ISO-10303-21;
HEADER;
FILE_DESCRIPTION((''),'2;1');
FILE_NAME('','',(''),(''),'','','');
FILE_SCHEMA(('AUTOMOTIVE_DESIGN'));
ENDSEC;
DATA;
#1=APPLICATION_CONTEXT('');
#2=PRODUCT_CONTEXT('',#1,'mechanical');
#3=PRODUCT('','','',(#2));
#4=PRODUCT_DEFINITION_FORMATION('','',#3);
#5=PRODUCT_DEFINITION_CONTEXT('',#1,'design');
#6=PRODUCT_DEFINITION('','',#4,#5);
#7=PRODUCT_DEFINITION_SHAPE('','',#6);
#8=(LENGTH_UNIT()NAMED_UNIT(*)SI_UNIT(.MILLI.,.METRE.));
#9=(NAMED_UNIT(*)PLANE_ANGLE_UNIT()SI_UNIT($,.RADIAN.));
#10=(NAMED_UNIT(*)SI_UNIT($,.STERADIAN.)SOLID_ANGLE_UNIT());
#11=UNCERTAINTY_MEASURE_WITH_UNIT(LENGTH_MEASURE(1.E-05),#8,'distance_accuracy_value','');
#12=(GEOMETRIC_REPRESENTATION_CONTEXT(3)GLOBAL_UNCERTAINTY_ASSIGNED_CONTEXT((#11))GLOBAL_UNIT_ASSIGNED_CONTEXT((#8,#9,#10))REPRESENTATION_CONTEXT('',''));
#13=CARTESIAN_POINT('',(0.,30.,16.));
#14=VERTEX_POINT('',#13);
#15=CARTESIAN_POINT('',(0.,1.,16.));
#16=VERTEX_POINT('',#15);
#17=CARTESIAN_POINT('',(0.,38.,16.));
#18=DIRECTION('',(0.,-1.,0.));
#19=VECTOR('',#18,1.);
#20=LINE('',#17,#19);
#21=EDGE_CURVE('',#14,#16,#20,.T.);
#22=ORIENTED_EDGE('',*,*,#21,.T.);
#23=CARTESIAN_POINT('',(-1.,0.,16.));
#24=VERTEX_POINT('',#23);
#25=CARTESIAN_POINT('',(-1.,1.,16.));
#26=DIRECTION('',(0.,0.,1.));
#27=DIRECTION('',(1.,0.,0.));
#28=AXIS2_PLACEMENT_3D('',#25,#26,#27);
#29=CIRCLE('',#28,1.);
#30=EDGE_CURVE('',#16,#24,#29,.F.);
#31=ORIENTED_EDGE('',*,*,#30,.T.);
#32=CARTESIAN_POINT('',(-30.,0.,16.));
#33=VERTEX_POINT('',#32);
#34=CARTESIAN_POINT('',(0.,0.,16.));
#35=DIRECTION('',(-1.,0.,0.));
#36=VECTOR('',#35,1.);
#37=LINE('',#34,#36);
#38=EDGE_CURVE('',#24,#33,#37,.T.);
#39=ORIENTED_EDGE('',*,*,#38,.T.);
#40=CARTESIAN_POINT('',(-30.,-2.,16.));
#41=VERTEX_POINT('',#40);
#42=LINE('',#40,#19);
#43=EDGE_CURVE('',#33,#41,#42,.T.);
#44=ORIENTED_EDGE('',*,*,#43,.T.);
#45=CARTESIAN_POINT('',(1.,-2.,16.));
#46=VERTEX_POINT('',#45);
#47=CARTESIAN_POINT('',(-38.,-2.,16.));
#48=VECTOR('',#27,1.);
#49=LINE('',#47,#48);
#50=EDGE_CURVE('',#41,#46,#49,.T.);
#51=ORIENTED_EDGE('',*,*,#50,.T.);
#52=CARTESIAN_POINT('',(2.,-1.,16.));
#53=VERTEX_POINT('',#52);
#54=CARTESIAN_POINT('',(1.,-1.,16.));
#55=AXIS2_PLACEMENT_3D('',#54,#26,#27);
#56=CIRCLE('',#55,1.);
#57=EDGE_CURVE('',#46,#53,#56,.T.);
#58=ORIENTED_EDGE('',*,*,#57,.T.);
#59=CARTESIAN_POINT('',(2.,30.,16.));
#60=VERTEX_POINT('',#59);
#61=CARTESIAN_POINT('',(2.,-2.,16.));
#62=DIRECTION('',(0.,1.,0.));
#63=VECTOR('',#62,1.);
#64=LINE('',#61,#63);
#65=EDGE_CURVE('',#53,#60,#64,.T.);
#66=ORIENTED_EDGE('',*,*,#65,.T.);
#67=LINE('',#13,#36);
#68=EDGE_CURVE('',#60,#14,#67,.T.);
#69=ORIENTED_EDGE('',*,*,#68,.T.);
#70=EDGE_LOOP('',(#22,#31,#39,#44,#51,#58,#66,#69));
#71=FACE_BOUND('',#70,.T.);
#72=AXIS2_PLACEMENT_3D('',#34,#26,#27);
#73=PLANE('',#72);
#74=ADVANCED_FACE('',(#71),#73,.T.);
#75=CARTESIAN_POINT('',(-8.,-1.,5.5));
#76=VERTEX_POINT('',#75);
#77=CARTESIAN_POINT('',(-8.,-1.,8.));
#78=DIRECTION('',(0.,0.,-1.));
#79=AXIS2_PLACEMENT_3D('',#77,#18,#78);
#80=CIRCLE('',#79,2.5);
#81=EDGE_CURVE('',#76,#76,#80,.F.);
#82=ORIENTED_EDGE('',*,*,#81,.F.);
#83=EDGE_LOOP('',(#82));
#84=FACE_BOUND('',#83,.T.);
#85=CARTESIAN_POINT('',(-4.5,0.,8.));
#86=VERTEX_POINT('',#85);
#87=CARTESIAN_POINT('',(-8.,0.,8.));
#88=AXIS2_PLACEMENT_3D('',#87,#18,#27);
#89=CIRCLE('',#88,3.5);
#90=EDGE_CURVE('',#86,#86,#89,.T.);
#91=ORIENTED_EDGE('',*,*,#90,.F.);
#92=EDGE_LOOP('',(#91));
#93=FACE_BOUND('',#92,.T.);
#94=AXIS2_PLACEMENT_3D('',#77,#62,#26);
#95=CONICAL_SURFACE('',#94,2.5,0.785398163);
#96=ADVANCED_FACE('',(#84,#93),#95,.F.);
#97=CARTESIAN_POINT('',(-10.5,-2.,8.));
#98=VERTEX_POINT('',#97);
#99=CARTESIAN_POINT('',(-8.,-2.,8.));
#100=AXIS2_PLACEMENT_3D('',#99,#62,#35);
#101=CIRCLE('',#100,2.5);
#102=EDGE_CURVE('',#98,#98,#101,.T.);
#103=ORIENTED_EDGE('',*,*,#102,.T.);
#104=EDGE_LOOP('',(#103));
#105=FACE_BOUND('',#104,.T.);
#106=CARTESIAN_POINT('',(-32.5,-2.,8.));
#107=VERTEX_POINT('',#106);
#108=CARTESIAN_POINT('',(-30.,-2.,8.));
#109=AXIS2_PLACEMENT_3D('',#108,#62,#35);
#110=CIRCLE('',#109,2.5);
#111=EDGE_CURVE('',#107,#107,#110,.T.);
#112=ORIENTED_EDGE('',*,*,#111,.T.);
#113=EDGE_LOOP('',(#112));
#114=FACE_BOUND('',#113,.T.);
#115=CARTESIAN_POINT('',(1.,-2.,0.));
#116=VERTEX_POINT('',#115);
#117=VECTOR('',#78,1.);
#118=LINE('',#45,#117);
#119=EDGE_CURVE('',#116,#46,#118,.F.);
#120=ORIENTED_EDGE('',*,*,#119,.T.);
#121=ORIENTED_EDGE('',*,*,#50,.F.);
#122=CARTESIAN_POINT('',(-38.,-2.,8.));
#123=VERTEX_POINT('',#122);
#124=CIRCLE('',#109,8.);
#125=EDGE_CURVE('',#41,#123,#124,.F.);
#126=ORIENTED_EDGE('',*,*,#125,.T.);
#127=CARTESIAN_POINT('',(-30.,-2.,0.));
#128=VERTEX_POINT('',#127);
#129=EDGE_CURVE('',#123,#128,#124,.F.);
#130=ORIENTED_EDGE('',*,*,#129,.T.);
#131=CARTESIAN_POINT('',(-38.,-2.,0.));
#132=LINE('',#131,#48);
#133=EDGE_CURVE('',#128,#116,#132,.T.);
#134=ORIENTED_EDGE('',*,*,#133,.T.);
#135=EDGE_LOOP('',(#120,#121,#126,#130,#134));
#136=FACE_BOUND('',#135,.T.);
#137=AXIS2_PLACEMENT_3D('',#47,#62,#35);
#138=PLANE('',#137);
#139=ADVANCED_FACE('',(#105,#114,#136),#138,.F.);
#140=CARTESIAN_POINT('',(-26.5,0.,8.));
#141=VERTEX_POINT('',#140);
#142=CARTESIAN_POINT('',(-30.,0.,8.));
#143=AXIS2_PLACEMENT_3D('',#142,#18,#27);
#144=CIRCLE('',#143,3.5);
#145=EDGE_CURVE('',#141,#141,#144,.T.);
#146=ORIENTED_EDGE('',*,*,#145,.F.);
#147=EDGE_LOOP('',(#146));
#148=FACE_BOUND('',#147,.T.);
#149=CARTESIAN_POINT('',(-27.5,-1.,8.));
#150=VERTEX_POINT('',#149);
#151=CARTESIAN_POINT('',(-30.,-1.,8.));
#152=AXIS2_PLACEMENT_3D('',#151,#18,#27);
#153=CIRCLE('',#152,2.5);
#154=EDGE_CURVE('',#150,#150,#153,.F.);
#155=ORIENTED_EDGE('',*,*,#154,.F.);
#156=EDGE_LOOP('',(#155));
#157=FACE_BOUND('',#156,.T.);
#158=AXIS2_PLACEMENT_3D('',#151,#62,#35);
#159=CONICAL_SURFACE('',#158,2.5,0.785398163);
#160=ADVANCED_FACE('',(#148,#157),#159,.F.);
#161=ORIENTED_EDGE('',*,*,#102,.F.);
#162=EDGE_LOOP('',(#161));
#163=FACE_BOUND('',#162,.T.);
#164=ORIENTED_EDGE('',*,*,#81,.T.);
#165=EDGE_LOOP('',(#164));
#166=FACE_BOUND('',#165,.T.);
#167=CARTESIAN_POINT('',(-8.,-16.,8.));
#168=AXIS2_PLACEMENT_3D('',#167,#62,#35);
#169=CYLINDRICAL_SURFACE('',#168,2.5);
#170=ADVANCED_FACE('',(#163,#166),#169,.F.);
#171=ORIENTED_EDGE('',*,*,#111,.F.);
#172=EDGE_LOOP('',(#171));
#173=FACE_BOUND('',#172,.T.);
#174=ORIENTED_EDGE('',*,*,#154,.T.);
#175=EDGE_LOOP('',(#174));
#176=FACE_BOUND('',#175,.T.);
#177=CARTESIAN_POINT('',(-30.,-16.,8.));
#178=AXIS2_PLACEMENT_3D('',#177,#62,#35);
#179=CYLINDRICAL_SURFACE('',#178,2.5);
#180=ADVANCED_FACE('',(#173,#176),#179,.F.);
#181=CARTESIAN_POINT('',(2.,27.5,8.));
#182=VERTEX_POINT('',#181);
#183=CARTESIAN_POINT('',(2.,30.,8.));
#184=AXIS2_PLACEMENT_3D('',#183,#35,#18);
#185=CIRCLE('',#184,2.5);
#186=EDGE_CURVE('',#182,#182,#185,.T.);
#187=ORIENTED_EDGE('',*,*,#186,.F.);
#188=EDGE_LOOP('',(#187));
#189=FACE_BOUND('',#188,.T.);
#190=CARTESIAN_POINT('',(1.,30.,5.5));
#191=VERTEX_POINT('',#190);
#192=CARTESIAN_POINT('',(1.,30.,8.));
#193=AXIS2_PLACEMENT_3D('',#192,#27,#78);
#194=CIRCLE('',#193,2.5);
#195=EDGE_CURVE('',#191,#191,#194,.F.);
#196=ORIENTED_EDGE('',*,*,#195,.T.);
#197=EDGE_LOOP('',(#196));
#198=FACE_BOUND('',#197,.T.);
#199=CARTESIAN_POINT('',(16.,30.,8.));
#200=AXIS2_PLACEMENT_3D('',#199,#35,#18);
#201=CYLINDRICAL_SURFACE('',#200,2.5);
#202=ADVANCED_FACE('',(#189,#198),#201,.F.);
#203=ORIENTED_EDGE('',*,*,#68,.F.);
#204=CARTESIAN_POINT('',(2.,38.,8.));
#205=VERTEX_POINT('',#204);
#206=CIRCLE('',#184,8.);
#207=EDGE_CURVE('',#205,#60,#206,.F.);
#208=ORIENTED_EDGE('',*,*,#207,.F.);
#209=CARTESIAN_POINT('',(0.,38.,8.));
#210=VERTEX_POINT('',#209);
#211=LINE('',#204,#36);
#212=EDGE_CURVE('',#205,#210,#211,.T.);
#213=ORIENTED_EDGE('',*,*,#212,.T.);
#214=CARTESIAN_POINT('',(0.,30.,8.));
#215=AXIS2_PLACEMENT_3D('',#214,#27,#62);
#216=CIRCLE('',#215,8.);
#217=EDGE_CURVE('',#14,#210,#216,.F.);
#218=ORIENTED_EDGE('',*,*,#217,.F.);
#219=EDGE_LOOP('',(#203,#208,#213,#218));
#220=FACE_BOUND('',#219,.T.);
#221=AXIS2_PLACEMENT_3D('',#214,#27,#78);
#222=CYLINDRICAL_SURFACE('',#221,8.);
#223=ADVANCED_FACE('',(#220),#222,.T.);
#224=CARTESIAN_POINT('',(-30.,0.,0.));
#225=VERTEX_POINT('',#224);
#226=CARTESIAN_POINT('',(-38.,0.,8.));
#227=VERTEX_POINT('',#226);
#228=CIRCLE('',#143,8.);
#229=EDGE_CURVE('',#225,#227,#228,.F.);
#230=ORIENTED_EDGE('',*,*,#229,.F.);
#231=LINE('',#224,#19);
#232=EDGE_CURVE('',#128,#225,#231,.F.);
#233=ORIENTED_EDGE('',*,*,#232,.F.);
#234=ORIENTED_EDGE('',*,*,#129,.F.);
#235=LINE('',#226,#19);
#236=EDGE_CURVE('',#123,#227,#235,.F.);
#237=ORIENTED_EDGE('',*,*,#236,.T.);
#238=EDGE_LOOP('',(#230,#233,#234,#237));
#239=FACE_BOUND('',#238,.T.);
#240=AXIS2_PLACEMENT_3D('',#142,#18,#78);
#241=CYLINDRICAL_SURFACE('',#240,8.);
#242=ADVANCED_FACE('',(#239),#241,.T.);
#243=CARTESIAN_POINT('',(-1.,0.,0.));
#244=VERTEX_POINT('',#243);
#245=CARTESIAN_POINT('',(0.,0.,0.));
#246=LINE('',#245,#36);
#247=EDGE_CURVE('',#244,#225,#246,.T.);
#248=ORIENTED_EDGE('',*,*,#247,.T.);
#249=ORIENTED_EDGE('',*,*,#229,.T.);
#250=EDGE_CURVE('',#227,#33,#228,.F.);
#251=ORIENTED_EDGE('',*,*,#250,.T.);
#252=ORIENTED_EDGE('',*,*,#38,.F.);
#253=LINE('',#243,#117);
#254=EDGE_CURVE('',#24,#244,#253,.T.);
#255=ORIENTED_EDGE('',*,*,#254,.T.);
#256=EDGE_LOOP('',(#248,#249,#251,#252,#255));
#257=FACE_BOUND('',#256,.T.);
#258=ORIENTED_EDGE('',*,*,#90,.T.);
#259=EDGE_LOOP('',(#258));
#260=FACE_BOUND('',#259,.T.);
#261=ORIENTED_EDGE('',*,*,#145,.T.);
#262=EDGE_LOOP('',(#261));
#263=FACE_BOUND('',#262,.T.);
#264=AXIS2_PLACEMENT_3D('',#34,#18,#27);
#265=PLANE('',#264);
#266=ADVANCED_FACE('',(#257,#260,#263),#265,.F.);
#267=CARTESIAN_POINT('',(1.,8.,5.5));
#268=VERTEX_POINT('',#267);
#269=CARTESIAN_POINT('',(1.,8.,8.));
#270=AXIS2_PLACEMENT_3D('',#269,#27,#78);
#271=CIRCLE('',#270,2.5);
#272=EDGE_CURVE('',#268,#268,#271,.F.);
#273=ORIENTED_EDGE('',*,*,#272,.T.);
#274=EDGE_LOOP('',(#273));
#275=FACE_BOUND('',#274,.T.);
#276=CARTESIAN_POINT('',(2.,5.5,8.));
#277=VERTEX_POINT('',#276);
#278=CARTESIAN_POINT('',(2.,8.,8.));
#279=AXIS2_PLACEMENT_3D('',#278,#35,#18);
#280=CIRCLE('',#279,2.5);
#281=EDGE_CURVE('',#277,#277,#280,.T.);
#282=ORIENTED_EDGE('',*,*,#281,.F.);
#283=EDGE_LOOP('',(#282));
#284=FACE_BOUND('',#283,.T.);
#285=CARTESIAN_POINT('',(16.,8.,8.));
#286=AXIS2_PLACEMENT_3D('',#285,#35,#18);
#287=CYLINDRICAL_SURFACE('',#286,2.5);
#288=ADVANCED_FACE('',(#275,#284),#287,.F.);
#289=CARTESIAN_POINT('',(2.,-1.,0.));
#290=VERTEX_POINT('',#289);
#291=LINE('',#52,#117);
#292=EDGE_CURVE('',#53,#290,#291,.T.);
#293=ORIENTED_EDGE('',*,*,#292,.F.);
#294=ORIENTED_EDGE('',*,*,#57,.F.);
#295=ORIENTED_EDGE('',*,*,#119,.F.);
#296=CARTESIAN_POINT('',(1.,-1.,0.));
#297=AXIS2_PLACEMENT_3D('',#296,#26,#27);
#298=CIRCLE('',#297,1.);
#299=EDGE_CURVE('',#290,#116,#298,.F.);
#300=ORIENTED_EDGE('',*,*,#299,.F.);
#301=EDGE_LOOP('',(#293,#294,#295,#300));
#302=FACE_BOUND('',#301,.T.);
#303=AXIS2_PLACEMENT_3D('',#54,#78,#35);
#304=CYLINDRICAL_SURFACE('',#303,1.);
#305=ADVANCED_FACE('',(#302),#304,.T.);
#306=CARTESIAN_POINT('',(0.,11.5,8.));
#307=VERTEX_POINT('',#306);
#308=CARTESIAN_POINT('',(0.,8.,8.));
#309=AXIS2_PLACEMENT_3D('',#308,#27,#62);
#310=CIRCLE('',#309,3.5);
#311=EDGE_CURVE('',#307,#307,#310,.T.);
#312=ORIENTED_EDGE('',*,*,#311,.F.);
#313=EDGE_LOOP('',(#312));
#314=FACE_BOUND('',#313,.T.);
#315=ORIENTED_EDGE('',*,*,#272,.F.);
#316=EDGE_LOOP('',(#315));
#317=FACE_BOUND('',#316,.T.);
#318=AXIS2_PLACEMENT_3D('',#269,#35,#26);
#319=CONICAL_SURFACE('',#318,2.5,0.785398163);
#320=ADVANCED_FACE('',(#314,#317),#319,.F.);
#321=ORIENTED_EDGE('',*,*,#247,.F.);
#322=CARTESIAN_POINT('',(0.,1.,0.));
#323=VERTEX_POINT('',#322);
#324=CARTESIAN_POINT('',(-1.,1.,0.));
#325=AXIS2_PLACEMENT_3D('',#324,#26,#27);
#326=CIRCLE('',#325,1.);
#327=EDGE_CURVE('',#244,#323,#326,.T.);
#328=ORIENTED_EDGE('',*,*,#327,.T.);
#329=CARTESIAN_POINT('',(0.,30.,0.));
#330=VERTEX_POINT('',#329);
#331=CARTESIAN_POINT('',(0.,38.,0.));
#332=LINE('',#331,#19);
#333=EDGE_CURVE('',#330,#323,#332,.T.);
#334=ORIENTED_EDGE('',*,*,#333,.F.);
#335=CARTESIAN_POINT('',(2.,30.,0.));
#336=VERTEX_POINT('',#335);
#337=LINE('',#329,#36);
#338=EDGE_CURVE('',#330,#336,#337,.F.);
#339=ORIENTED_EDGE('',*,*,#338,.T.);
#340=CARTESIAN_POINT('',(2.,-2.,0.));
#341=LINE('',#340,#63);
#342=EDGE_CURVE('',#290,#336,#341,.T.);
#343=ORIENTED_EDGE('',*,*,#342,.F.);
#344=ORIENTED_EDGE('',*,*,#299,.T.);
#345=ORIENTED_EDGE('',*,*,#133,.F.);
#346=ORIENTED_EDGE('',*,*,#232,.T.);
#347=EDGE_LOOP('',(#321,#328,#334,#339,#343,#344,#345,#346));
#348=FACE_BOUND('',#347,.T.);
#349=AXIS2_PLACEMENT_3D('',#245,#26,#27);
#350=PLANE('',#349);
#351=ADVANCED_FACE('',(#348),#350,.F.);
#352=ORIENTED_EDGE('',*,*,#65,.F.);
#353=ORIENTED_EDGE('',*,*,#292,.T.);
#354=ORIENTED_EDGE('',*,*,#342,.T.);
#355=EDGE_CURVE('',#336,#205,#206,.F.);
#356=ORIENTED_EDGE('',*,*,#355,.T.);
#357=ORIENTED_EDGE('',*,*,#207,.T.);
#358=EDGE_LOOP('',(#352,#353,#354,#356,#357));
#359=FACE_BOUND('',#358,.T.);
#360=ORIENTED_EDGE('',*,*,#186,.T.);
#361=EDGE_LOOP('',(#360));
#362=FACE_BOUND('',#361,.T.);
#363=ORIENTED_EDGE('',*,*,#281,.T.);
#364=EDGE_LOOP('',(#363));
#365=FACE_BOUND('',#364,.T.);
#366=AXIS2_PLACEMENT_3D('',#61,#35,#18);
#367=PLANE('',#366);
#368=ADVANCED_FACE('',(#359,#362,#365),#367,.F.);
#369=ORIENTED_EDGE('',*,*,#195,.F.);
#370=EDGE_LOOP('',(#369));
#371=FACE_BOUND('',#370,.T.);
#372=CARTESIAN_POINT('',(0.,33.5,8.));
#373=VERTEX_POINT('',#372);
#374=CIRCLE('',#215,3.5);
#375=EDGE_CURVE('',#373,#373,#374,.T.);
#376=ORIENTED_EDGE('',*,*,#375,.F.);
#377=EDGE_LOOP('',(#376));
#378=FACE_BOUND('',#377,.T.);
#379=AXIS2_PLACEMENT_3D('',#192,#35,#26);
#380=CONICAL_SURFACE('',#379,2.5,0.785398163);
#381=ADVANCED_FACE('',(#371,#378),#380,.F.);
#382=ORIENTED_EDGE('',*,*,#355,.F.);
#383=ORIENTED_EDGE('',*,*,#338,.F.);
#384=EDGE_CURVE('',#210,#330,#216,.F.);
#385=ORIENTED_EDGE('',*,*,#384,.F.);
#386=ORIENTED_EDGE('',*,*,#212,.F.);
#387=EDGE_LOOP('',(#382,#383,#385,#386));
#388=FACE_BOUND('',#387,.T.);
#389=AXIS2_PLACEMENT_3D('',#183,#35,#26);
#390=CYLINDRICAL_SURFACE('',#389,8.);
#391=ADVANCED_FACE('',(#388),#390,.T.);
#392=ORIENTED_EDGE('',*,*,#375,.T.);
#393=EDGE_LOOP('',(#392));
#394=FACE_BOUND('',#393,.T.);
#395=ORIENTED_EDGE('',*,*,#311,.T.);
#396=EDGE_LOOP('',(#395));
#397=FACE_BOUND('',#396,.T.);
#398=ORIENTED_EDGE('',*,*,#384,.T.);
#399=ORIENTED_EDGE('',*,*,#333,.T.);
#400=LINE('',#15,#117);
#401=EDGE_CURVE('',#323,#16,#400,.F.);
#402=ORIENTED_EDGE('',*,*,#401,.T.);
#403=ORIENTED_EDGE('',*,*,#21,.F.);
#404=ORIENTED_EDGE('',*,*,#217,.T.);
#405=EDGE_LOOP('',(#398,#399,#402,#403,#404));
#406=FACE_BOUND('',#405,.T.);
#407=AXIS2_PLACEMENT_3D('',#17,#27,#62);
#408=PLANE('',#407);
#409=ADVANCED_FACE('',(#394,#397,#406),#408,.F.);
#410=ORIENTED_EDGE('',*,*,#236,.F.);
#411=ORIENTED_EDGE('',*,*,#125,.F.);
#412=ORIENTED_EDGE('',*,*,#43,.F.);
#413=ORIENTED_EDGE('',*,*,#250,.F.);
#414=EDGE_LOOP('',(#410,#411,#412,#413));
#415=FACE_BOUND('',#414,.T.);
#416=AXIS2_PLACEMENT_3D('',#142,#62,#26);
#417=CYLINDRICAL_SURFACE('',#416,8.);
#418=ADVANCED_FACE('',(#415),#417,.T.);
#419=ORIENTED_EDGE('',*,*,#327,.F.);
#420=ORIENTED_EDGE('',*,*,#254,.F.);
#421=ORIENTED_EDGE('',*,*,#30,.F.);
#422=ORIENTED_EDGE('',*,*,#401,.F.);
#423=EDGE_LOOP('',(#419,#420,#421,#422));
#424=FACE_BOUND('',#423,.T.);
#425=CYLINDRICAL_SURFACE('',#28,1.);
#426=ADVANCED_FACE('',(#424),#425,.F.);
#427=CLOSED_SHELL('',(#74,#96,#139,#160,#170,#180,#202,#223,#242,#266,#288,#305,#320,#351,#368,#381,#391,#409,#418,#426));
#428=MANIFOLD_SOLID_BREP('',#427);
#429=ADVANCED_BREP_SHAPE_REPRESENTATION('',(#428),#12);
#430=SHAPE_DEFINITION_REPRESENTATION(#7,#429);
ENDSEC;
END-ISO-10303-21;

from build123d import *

# Parameters (mm, degrees)
EXTRUDE_1_DEPTH     = 16
FILLET_1_R          = 8
SKETCH_2_R          = 2.5
CUT_EXTRUDE_1_DEPTH = 16
SKETCH_3_R          = 2.5
CUT_EXTRUDE_2_DEPTH = 16
CHAMFER_1_SIZE      = 1
FILLET_2_R          = 1


with BuildPart() as part:
    # 草图1 → 凸台-拉伸1 (new body)
    with BuildSketch(Plane.XY):
        Polygon((0, 38), (0, 0), (-38, 0), (-38, -2), (2, -2), (2, 38), align=None)
    extrude(amount=EXTRUDE_1_DEPTH)

    # 圆角1
    fillet_1_edges = [part.edges().sort_by_distance(p)[0] for p in [
        (-38, -1, 0),
        (-38, -1, 16),
        (1, 38, 16),
        (1, 38, 0),
    ]]
    fillet(fillet_1_edges, radius=FILLET_1_R - 0.0001)  # a hair under: the kernel refuses the full size

    # 草图2 → 切除-拉伸1 (cut)
    with BuildSketch(Plane.ZY):
        with Locations(Location((8, 30, 0), (0, 0, 270))):
            Circle(SKETCH_2_R)
        with Locations(Location((8, 8, 0), (0, 0, 270))):
            Circle(SKETCH_2_R)
    extrude(amount=-CUT_EXTRUDE_1_DEPTH, mode=Mode.SUBTRACT)

    # 草图3 → 切除-拉伸2 (cut)
    with BuildSketch(Plane(origin=(0, 0, 0), x_dir=(1, 0, 0), z_dir=(0, 1, 0))):
        with Locations(Location((-30, -8, 0), (0, 0, 180))):
            Circle(SKETCH_3_R)
        with Locations(Location((-8, -8, 0), (0, 0, 180))):
            Circle(SKETCH_3_R)
    extrude(amount=-CUT_EXTRUDE_2_DEPTH, mode=Mode.SUBTRACT)

    # 倒角1
    chamfer_1_edges = [part.edges().sort_by_distance(p)[0] for p in [
        (0, 32.5, 8),
        (0, 10.5, 8),
        (-27.5, 0, 8),
        (-5.5, 0, 8),
    ]]
    chamfer(chamfer_1_edges, length=CHAMFER_1_SIZE)

    # 圆角2
    fillet_2_edges = [part.edges().sort_by_distance(p)[0] for p in [
        (2, -2, 8),
        (0, 0, 8),
    ]]
    fillet(fillet_2_edges, radius=FILLET_2_R)


solid = part.part
